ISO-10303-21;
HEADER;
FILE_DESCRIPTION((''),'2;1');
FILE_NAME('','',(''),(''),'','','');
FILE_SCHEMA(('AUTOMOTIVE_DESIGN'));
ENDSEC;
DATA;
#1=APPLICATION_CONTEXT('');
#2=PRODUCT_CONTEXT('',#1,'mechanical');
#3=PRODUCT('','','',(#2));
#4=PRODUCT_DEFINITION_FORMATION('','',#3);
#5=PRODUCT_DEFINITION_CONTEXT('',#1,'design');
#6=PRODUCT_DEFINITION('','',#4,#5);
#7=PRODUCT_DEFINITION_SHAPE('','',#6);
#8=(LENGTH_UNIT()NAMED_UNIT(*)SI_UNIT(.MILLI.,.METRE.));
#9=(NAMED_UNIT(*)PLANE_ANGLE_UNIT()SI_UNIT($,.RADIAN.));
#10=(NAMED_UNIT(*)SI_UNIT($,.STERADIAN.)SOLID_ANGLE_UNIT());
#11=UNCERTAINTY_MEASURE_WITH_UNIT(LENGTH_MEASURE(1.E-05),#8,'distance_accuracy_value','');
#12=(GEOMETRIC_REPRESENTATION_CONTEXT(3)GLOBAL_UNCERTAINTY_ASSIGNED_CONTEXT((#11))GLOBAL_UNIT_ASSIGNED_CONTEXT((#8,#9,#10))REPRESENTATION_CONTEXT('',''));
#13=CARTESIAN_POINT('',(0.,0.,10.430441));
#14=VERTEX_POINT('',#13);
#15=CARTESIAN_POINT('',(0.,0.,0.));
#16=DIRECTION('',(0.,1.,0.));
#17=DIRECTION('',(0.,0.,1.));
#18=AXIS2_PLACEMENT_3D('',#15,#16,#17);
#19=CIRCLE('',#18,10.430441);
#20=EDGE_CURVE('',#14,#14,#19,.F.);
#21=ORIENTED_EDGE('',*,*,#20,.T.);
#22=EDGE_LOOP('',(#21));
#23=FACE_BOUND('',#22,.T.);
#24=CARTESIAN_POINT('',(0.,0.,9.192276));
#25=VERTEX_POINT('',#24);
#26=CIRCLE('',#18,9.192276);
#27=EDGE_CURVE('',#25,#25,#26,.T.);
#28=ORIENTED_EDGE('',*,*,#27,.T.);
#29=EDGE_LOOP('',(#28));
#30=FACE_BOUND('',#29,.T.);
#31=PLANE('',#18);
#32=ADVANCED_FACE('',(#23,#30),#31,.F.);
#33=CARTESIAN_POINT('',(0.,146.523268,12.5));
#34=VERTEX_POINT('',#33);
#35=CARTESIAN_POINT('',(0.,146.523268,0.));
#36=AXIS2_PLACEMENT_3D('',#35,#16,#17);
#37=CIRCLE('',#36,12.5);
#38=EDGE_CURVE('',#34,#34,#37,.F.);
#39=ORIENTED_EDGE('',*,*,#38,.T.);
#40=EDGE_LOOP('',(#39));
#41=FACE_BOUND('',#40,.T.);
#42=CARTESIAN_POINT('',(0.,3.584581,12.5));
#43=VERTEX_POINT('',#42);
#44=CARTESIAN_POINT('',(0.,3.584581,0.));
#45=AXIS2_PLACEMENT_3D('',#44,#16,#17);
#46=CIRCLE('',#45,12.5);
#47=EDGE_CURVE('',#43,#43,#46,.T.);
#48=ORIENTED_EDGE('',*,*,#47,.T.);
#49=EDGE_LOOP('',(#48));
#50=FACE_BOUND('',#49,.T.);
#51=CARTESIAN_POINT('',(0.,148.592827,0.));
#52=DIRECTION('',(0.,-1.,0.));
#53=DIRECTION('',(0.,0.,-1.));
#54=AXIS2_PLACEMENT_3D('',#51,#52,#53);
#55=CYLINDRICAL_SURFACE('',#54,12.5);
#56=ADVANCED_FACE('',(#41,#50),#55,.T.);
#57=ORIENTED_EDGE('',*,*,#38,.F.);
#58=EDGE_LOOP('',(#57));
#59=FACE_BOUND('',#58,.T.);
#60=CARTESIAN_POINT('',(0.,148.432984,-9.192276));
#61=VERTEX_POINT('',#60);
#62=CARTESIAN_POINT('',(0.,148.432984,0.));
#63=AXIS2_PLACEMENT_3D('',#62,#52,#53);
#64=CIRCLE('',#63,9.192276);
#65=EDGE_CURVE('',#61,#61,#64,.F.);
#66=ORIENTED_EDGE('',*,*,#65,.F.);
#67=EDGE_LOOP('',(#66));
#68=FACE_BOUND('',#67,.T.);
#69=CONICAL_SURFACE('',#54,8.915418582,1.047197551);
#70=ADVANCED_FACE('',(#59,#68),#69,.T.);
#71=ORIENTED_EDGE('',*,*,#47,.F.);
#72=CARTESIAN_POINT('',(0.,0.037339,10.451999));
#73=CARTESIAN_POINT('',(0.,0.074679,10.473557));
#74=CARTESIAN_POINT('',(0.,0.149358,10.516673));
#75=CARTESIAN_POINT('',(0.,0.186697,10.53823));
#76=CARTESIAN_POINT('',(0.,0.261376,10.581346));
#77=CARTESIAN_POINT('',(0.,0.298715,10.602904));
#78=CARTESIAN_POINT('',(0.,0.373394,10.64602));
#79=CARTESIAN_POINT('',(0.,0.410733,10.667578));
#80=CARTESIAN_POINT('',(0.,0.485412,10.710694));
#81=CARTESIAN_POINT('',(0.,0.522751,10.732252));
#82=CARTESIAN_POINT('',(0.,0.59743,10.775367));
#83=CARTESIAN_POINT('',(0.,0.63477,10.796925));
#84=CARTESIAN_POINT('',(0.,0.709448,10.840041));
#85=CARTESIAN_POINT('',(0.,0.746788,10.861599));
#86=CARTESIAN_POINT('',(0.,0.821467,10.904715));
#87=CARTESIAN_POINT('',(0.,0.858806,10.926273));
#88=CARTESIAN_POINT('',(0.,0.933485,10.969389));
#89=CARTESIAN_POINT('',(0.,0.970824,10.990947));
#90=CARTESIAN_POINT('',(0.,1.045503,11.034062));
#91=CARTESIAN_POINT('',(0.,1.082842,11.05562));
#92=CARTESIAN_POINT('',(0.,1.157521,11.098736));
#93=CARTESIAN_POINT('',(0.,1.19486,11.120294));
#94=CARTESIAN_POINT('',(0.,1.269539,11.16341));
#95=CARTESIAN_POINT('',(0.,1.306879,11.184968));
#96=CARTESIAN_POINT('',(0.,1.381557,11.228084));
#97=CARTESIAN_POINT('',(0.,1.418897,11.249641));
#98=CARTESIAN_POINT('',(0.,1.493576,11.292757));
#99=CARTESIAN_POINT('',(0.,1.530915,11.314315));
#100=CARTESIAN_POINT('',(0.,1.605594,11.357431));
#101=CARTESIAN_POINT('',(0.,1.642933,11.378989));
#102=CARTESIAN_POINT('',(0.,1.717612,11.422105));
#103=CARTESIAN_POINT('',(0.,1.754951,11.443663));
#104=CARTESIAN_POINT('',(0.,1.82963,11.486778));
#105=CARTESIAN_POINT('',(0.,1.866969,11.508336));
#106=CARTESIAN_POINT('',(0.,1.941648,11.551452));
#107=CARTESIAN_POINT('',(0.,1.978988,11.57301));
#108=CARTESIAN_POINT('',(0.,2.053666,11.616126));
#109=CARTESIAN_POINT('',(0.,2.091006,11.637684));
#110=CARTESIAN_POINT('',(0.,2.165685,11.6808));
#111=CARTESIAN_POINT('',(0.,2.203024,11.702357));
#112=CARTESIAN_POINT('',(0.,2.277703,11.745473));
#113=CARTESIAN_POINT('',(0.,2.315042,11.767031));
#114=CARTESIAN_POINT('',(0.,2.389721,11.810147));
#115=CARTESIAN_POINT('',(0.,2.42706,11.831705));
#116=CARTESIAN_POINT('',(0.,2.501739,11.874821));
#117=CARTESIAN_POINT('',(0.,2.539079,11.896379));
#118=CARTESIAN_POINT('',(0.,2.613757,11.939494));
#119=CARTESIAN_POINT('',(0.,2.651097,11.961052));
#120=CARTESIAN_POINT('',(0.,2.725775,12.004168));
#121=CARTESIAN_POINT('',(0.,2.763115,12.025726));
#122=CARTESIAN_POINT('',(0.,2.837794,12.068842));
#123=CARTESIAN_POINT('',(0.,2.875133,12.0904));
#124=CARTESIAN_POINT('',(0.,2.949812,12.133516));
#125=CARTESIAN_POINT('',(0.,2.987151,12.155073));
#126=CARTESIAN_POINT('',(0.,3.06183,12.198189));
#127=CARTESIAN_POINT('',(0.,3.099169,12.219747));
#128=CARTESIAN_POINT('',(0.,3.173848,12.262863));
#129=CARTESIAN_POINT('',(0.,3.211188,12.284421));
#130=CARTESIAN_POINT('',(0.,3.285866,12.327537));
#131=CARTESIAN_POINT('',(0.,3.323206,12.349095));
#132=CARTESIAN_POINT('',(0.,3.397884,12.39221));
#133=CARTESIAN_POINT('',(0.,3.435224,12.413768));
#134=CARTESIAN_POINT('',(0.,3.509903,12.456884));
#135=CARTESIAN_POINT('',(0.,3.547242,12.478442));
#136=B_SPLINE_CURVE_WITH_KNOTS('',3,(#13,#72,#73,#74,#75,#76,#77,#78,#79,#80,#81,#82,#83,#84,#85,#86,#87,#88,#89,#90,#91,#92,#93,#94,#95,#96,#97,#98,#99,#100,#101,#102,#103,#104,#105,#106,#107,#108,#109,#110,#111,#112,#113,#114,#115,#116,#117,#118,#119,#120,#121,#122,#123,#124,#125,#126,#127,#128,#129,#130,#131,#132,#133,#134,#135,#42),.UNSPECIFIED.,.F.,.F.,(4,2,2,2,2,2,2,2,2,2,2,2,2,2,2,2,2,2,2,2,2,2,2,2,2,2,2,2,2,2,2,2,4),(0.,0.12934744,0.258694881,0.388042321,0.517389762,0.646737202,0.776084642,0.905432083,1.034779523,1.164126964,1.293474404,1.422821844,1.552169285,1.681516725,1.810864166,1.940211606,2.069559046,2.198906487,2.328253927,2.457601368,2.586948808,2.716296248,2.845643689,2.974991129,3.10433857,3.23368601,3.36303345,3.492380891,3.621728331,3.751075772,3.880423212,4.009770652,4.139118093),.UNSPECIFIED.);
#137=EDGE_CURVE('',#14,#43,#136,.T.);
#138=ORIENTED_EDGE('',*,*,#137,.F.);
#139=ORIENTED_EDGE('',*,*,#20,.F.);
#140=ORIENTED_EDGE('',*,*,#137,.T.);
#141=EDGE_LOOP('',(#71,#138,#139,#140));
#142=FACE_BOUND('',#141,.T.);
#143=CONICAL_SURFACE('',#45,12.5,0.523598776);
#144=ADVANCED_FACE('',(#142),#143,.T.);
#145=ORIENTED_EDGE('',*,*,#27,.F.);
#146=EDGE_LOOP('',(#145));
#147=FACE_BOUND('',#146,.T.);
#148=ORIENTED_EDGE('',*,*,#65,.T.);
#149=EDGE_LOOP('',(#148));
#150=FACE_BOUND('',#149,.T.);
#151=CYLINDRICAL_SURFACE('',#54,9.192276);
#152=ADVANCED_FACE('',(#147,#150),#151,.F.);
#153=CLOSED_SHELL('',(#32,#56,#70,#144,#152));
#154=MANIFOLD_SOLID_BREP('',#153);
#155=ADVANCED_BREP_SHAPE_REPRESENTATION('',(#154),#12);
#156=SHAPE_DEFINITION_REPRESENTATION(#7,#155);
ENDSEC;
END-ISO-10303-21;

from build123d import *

# Parameters (mm, degrees)
SKETCH1_R           = 12.5
BOSS_EXTRUDE1_DEPTH = 148.592827
SKETCH2_R           = 9.192275911
CUT_EXTRUDE1_DEPTH  = 150.640663711
CHAMFER1_SIZE       = 2.069559
CHAMFER1_SIZE_2     = 3.584581


with BuildPart() as part:
    # Sketch1 → Boss-Extrude1 (new body)
    with BuildSketch(Plane(origin=(0, 0, 0), x_dir=(1, 0, 0), z_dir=(0, 1, 0))):
        with Locations(Location((0, 0, 0), (0, 0, 270))):
            Circle(SKETCH1_R)
    extrude(amount=BOSS_EXTRUDE1_DEPTH)

    # Sketch2 → Cut-Extrude1 (cut, through all)
    with BuildSketch(Plane(origin=(0, 0, 0), x_dir=(1, 0, 0), z_dir=(0, 1, 0))):
        with Locations(Location((0, 0, 0), (0, 0, 270))):
            Circle(SKETCH2_R)
    extrude(amount=CUT_EXTRUDE1_DEPTH, mode=Mode.SUBTRACT)

    # Chamfer1
    # the kernel refuses this chamfer: 3.584581, 2.069559 mm, written as the material it takes off along each edge
    with BuildSketch(Plane(origin=(0, 148.592827, 0), x_dir=(0, 0, 1), z_dir=(-1, 0, 0))) as chamfer1_piece_1:
        Polygon((12.5, -CHAMFER1_SIZE), (12.5 - CHAMFER1_SIZE_2, 0), (12.5, 0), align=None)
    revolve(axis=Axis((0, 148.592827, 0), (0, 1, 0)), mode=Mode.SUBTRACT)
    with BuildSketch(Plane(origin=(0, 0, 0), x_dir=(0, 0, 1), z_dir=(-1, 0, 0))) as chamfer1_piece_2:
        Polygon((12.5, CHAMFER1_SIZE_2), (12.5 - CHAMFER1_SIZE, 0), (12.5, 0), align=None)
    revolve(axis=Axis((0, 0, 0), (0, 1, 0)), mode=Mode.SUBTRACT)


solid = part.part
